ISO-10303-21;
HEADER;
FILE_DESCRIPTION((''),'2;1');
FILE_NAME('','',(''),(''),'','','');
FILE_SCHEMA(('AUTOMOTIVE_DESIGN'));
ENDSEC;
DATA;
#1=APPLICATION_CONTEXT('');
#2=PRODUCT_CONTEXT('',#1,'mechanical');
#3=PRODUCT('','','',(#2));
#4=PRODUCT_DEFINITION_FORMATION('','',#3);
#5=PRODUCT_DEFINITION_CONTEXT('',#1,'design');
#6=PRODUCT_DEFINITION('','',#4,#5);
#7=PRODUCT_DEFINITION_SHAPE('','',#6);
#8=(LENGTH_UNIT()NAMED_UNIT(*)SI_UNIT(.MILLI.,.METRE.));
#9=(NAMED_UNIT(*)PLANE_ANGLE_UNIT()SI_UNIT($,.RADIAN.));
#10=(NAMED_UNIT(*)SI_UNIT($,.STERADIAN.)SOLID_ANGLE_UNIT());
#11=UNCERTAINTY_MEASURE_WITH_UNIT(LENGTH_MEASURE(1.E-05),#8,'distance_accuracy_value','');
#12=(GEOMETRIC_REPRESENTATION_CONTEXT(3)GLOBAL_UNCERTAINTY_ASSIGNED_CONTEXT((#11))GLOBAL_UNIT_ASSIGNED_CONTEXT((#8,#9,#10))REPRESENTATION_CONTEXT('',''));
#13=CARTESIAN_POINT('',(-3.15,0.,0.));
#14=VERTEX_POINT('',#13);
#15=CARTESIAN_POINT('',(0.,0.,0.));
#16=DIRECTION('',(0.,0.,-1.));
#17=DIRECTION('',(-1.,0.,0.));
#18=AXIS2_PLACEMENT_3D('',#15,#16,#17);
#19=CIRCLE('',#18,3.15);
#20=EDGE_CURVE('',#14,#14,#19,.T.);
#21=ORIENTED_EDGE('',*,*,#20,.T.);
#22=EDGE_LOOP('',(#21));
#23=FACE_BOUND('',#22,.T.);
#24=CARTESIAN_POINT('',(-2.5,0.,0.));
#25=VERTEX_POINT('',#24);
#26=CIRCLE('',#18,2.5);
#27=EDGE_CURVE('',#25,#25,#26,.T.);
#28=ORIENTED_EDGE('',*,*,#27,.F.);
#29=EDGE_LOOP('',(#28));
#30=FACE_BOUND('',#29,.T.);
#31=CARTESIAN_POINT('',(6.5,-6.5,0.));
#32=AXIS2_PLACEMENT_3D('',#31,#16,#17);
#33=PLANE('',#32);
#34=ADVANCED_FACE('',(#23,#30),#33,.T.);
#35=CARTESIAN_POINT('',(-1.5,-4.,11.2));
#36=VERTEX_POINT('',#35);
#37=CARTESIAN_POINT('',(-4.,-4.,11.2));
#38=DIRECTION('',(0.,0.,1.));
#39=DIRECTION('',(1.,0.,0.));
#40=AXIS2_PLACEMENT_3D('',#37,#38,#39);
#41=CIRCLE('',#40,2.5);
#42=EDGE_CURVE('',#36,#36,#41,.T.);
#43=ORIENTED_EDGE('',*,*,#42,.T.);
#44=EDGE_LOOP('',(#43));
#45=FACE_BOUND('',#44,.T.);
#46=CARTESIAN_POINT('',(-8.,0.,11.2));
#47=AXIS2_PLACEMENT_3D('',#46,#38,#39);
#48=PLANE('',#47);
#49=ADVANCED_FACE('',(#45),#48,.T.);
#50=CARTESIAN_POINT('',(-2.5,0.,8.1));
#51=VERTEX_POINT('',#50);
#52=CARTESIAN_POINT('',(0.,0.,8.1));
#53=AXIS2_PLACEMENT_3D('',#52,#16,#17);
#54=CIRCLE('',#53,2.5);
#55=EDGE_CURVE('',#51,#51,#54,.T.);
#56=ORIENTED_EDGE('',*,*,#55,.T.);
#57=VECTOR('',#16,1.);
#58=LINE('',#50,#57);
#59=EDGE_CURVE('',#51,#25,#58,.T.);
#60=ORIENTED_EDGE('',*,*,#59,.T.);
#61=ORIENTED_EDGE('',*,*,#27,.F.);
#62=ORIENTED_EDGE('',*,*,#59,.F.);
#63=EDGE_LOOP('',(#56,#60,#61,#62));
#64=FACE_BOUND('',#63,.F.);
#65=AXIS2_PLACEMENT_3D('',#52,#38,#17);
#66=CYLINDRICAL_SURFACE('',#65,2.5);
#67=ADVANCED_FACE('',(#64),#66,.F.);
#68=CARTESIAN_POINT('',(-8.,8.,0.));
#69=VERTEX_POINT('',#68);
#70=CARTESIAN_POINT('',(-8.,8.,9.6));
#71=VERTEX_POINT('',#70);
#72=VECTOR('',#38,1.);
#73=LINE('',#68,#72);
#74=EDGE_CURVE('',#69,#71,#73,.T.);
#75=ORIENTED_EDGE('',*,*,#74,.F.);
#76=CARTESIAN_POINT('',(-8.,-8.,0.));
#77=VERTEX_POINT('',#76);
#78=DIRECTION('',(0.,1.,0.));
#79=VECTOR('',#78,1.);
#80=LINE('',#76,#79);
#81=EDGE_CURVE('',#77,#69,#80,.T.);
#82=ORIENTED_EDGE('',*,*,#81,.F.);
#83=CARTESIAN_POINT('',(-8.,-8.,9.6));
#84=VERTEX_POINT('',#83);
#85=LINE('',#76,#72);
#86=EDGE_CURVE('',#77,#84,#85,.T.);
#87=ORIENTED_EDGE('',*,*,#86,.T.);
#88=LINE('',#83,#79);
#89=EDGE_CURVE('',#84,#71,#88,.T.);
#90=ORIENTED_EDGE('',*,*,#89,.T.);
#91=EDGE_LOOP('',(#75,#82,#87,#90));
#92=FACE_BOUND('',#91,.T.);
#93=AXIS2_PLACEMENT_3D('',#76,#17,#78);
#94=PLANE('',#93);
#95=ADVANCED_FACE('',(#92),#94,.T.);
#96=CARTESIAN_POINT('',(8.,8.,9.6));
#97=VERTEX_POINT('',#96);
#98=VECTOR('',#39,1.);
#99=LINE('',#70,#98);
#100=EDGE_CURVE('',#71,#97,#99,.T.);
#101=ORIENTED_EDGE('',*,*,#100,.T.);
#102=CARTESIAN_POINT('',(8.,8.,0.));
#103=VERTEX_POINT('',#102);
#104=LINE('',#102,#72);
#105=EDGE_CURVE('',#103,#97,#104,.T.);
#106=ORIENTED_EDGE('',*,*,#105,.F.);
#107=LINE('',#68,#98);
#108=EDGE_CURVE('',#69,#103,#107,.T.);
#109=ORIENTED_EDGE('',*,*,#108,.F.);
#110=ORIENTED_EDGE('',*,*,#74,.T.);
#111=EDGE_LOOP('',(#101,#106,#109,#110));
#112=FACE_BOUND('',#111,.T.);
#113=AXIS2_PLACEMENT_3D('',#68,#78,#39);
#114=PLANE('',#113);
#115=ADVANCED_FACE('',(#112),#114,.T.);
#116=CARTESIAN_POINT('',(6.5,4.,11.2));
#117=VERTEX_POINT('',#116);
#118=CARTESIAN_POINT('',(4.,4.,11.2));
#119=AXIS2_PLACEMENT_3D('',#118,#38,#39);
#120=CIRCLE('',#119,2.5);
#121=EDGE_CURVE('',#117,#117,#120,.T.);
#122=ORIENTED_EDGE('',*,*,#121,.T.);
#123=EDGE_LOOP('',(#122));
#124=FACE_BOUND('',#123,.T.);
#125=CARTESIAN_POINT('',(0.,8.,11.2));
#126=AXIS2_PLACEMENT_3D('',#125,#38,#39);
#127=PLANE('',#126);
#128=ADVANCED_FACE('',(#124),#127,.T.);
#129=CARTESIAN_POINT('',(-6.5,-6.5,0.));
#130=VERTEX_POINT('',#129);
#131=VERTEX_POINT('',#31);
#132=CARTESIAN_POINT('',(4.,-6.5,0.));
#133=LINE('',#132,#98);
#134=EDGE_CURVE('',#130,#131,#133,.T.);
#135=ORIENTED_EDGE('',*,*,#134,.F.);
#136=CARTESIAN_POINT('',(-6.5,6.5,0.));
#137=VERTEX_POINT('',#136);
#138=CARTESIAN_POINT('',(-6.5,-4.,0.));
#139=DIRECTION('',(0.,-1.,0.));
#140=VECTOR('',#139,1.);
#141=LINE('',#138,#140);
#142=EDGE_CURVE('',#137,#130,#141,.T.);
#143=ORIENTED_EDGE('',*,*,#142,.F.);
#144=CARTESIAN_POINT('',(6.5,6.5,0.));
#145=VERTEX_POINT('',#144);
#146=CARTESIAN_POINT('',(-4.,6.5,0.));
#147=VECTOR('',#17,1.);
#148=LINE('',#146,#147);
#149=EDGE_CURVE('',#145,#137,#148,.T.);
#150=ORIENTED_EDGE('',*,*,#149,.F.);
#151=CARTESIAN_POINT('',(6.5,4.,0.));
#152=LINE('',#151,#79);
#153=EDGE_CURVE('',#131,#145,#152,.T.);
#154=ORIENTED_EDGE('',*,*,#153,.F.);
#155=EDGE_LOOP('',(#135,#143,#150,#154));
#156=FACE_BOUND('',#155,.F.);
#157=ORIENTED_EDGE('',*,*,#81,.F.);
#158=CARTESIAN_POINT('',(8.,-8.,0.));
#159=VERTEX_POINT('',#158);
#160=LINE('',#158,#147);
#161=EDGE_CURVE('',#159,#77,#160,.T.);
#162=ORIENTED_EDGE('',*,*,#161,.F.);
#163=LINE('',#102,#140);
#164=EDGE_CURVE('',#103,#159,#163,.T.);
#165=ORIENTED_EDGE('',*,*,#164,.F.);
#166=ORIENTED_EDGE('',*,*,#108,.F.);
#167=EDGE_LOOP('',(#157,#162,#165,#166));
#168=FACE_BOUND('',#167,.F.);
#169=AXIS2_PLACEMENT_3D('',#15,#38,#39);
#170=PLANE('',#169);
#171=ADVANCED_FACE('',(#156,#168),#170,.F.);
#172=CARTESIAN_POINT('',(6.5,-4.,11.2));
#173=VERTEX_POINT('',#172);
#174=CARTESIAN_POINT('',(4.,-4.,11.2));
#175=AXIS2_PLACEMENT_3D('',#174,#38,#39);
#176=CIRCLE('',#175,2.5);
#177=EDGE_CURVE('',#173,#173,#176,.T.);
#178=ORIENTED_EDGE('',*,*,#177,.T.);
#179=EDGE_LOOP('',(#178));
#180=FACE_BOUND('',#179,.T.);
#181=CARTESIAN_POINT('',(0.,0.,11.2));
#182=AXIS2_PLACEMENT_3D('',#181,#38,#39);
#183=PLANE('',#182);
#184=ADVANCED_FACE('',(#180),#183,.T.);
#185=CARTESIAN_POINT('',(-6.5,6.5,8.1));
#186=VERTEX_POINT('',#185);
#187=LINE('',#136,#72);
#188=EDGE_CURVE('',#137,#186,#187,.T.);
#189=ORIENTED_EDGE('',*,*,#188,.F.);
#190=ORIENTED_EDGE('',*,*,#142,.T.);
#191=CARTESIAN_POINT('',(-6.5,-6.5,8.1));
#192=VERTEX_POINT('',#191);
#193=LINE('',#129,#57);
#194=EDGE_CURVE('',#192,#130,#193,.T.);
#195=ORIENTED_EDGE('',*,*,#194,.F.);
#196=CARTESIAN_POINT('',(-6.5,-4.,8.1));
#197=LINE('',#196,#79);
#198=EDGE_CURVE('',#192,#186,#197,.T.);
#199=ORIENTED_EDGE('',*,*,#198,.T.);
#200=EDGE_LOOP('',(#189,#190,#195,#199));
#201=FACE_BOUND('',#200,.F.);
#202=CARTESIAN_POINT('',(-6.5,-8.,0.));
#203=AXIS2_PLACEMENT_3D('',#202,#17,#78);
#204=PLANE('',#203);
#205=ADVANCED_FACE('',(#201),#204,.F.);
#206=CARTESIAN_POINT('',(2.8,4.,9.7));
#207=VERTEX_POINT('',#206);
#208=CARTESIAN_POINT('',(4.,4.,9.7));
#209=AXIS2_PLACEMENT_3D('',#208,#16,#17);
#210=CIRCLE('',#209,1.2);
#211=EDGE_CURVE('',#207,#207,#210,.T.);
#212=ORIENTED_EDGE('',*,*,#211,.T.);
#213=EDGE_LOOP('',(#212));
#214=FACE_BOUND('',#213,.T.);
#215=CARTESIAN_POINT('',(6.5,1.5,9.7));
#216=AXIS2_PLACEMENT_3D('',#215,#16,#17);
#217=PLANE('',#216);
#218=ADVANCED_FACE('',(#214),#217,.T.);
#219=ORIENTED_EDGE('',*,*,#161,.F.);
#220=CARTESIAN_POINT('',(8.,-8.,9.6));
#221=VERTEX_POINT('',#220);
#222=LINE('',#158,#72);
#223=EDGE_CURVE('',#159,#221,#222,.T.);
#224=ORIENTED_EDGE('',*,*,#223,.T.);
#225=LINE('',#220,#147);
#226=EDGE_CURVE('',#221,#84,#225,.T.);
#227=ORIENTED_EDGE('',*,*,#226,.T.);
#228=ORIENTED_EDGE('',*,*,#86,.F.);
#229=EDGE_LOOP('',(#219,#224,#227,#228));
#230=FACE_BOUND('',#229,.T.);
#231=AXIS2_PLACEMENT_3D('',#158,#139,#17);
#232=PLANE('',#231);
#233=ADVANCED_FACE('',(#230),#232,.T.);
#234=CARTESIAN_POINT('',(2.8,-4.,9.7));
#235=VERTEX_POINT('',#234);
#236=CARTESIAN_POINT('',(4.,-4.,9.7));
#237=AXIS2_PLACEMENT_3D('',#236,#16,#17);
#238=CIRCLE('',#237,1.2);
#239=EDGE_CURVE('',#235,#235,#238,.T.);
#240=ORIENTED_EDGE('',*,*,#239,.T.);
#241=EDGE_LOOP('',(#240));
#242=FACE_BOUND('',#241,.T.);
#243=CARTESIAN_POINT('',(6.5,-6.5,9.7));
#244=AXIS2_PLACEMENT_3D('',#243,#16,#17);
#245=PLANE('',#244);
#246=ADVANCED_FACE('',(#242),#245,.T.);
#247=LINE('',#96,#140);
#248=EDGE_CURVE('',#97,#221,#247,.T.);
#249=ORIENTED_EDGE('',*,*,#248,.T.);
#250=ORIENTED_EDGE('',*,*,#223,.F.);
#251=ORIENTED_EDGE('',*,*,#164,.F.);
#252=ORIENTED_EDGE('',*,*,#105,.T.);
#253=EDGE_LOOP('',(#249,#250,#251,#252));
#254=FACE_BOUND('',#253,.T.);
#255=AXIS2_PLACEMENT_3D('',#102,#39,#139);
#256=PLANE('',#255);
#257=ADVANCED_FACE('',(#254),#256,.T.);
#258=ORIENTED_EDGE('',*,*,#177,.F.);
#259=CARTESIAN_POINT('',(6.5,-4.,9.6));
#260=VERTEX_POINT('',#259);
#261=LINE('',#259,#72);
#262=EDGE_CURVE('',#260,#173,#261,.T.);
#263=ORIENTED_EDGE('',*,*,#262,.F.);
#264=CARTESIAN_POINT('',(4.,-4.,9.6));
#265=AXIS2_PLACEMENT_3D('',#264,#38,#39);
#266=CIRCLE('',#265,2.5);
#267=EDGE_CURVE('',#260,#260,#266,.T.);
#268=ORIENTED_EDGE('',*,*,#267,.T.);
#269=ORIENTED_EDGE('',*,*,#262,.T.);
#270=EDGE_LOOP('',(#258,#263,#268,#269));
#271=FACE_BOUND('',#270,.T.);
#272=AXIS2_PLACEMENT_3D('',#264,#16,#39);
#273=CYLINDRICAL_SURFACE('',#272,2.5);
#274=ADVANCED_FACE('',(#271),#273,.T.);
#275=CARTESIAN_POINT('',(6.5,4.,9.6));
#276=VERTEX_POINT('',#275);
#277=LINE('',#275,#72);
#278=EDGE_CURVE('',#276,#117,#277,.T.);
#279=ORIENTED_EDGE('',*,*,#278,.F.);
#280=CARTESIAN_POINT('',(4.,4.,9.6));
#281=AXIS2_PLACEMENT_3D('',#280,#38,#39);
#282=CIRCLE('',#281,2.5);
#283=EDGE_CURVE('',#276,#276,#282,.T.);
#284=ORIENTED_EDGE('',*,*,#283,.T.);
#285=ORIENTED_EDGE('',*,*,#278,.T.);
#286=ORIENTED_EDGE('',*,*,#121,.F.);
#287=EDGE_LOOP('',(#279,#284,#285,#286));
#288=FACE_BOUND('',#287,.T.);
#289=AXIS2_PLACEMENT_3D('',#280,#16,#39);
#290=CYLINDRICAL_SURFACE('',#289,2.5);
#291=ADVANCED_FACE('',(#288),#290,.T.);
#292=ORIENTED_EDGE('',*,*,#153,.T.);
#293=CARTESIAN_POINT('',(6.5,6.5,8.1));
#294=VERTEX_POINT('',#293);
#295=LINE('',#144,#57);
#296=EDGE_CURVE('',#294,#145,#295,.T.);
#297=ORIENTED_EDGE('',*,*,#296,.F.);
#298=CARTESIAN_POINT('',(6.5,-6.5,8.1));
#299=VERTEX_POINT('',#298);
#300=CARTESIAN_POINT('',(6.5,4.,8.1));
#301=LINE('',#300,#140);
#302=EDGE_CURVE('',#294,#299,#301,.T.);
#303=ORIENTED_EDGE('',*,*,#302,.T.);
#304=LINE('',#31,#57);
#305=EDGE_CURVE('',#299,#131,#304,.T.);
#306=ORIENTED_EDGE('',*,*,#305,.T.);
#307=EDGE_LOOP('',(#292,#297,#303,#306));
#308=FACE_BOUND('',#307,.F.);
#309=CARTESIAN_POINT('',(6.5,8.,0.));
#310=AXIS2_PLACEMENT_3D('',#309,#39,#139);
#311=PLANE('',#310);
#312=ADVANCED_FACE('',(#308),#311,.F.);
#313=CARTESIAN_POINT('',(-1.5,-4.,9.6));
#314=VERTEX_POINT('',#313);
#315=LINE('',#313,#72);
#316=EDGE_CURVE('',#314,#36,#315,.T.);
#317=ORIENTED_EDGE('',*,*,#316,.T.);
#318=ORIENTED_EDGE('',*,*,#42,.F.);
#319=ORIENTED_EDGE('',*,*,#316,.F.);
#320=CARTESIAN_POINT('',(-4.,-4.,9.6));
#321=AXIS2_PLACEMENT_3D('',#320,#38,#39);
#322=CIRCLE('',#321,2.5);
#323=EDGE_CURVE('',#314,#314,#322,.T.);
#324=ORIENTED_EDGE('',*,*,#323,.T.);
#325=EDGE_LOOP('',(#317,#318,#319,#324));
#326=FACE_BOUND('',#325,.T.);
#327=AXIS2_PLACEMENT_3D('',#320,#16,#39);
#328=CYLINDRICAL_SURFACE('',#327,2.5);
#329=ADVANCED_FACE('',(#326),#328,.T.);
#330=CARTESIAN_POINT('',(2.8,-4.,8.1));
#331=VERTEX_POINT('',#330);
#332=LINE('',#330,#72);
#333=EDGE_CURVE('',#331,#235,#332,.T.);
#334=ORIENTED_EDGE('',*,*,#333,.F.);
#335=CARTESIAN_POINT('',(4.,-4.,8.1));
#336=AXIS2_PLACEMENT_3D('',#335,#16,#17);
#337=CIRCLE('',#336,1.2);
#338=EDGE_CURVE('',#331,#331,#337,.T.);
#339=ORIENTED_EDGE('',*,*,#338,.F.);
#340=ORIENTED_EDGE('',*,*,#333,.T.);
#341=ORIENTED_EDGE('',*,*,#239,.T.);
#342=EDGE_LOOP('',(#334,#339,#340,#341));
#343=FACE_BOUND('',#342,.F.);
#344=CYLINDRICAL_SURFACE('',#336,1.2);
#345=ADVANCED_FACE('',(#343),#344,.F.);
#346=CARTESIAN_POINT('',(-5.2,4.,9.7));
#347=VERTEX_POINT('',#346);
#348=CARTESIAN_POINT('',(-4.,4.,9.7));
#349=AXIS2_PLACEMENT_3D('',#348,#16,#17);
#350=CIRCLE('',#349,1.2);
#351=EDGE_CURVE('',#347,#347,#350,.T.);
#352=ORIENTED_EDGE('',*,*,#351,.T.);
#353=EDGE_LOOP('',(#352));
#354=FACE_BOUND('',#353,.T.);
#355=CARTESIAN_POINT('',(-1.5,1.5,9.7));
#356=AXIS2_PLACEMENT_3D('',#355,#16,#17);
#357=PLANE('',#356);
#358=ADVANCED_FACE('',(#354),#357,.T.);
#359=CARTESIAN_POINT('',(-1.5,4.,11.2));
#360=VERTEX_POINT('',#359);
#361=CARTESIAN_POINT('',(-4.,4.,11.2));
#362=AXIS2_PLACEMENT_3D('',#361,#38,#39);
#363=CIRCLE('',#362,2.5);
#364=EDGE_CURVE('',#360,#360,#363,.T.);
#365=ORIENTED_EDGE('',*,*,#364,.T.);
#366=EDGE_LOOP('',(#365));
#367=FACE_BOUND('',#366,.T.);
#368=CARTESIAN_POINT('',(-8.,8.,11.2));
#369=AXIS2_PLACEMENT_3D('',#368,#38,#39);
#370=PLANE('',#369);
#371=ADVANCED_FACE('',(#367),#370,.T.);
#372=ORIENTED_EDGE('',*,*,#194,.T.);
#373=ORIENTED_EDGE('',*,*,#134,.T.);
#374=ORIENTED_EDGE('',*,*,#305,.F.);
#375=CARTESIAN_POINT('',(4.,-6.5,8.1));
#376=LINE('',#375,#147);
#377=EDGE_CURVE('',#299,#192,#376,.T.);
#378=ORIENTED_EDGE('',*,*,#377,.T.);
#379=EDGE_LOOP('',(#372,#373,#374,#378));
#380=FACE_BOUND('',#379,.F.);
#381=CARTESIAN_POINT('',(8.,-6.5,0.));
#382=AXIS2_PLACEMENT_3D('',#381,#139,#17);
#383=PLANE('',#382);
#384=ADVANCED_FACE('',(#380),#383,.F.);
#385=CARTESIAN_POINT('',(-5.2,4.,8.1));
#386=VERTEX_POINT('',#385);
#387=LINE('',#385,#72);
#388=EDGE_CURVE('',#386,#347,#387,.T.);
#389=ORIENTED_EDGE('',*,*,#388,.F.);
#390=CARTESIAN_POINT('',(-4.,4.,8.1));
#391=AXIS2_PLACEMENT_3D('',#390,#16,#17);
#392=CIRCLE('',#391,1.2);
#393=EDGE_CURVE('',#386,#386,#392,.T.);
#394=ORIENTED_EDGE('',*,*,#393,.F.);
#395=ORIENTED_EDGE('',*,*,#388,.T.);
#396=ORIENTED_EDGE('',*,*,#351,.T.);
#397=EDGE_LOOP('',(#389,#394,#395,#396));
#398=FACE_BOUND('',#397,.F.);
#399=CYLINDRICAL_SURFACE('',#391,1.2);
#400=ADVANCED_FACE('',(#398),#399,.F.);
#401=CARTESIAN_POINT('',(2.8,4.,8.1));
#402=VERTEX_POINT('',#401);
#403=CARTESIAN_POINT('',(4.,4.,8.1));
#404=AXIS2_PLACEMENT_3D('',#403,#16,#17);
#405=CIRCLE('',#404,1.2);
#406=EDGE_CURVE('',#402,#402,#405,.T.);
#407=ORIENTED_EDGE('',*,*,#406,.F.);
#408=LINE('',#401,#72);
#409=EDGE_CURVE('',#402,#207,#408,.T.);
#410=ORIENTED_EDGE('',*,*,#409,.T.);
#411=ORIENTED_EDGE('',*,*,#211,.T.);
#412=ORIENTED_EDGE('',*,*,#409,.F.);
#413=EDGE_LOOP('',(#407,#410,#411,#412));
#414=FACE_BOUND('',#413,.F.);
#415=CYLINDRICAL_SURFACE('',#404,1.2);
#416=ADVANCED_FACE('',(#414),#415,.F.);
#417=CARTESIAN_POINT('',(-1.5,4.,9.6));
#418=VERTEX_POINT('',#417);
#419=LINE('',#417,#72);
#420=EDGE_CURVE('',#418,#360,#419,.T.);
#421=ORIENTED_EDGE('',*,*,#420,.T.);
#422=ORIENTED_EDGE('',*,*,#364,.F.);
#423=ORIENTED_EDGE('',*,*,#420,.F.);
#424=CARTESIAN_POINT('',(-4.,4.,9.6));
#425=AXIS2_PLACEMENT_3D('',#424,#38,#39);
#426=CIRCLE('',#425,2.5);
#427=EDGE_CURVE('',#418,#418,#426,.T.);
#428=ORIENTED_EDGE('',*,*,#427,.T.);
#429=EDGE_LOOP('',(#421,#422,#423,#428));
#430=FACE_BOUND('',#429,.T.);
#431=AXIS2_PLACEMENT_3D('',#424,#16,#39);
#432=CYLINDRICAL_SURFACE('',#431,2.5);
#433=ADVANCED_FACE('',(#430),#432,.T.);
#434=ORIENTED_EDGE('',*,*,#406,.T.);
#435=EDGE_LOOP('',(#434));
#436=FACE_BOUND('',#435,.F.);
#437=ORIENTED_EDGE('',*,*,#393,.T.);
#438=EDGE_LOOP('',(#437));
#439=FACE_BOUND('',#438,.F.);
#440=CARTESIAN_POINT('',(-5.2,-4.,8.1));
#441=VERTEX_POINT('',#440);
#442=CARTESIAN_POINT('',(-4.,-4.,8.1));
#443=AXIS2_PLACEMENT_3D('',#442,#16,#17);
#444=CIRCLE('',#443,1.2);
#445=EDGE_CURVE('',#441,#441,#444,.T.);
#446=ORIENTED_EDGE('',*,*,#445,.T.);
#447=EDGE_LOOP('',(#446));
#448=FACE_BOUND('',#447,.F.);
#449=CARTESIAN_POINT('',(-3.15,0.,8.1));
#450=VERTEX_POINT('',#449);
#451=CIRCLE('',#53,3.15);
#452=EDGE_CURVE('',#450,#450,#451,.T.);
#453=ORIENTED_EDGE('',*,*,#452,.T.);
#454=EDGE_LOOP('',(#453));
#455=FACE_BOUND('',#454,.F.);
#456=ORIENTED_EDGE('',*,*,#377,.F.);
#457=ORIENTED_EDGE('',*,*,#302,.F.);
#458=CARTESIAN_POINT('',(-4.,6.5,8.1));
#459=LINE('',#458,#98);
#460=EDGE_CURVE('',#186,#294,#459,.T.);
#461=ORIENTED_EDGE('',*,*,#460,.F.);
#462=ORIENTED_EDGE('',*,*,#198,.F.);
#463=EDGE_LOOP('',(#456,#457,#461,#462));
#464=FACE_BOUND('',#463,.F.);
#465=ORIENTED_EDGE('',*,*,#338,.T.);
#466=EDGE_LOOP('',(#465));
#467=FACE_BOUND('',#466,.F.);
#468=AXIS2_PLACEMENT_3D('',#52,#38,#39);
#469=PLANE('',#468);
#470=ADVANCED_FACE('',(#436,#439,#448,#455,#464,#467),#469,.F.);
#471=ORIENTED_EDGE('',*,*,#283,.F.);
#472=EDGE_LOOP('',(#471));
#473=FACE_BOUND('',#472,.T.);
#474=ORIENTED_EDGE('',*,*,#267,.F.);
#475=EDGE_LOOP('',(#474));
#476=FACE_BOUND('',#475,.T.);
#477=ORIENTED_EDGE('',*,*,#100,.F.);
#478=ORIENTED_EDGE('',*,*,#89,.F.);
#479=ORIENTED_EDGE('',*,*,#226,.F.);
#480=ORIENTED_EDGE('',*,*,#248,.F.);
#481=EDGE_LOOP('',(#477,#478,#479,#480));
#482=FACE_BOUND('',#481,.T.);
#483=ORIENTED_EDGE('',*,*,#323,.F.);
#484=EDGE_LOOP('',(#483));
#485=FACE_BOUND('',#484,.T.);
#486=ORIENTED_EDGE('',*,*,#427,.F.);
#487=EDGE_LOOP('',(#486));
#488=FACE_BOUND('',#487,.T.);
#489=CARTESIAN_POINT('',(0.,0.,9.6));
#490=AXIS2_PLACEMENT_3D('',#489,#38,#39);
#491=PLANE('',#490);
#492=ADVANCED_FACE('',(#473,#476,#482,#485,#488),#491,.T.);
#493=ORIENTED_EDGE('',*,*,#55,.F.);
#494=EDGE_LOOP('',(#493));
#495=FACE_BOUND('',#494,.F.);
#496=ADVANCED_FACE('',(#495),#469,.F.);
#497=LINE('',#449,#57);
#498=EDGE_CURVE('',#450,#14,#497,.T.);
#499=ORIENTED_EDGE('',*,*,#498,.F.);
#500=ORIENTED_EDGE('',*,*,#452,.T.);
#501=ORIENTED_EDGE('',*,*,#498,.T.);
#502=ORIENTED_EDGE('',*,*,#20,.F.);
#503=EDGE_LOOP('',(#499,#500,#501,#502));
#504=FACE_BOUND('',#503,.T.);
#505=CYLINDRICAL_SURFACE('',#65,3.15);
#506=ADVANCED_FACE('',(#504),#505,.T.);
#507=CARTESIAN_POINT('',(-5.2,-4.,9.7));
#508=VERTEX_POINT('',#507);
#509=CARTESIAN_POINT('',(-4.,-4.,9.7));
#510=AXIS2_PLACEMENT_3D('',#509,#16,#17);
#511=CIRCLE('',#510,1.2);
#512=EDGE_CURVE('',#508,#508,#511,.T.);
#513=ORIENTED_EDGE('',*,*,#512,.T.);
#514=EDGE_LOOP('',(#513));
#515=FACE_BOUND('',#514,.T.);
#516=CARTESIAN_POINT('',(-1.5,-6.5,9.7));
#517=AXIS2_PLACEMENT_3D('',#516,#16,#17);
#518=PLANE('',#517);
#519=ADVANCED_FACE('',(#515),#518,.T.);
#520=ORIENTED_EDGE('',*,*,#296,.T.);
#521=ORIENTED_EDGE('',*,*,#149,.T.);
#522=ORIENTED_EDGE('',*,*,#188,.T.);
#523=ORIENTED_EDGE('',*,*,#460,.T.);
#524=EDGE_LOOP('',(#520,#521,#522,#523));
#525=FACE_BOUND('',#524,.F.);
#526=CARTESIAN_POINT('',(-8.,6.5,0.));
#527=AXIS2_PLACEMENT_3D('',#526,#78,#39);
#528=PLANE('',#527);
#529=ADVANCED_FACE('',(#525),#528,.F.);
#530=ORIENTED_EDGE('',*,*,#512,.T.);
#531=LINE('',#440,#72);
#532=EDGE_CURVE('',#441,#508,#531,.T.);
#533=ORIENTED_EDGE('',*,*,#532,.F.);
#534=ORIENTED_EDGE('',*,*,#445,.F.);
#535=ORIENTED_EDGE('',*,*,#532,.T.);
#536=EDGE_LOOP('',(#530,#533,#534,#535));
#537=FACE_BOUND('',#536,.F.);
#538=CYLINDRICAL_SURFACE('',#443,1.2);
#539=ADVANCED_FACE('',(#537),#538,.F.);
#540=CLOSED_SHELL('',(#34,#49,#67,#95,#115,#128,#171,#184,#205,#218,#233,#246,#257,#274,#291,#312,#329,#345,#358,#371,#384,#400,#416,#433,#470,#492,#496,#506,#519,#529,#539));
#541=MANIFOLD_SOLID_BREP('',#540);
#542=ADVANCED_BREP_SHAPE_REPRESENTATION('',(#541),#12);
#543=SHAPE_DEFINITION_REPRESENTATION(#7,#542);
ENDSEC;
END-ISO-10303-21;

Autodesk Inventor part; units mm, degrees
ref_plane "YZ Plane" through (0, 0, 0) normal (1, 0, 0) x (0, 1, 0)
ref_plane "XZ Plane" through (0, 0, 0) normal (0, 1, 0) x (-1, 0, 0)
ref_plane "XY Plane" through (0, 0, 0) normal (0, 0, 1) x (1, 0, 0)
sketch "Sketch1" plane through (0, 0, 0) normal (0, 0, 1) x (1, 0, 0)
  line L0 (-8, 8) -> (8, 8)
  line L1 (8, 8) -> (8, -8)
  line L2 (8, -8) -> (-8, -8)
  line L3 (-8, -8) -> (-8, 8)
  point P0 (0, 0)
  dimension "d0" = 16
  dimension "d1" = 16
  dimension "d2" = 8
  dimension "d3" = 8
extrude "Extrusion1" add sketch "Sketch1" along normal blind 9.6
shell "Shell1" thickness 1.5 removed faces 1 at (-2.6667, 2.6667, 0)
sketch "Sketch2" plane through (0, 0, 9.6) normal (0, 0, 1) x (1, 0, 0)
  circle A0 centre (4, -4) radius 2.5
  line L0 (8, 8) -> (8, -8) projected
  line L1 (8, -8) -> (-8, -8) projected
  dimension "d7" = 5
  dimension "d10" = 4
  dimension "d11" = 4
extrude "Extrusion2" add sketch "Sketch2" along normal blind 1.6
sketch "Sketch3" plane through (6.5, -6.5, 8.1) normal (0, 0, -1) x (-1, 0, 0)
  circle A0 centre (2.5, 2.5) radius 2.5 projected
  circle A1 centre (2.5, 2.5) radius 1.2
  point P0 (6.5, 6.5)
  dimension "d18" = 2.4
extrude "Extrusion3" cut sketch "Sketch3" against normal blind 1.6 contours A1
pattern_linear "Rectangular Pattern1" count 2 spacing 8 along (0, 1, 0) count 2 spacing 8 along (-1, 0, 0) of "Extrusion2", "Extrusion3"
sketch "Sketch4" plane through (6.5, -6.5, 8.1) normal (0, 0, -1) x (-1, 0, 0)
  circle A0 centre (2.5, 10.5) radius 1.2 projected
  circle A1 centre (2.5, 2.5) radius 1.2 projected
  line L0 (0, 13) -> (0, 0) projected
  line L1 (0, 0) -> (13, 0) projected
  circle A2 centre (6.5, 6.5) radius 3.15
  circle A3 centre (6.5, 6.5) radius 2.5
  point P0 (6.5, 6.5)
  dimension "d21" = 6.5
  dimension "d22" = 6.5
  dimension "d23" = 10.5
  dimension "d24" = 2.5
  dimension "d25" = 5
  dimension "d26" = 6.3
extrude "Extrusion4" add sketch "Sketch4" along normal up to surface (8.1 mm away) contours A2
pattern_of_one "Rectangular Pattern2"
equation "\"d0\" = 8 * WIDTH"
equation "\"d1\" = 8 * LENGTH"
equation "\"d2\" = 0.5 * d0"
equation "\"d3\" = 0.5 * d1"
equation "\"d4\" = HEIGHT"
equation "\"d21\" = 0.5 * d23 + 0.5 * d24"
equation "\"d22\" = d21"
equation "\"WIDTH\" = 2"
equation "\"HEIGHT\" = 9.6"
equation "\"LENGTH\" = 2"
properties part number "3003" material "Steel"
